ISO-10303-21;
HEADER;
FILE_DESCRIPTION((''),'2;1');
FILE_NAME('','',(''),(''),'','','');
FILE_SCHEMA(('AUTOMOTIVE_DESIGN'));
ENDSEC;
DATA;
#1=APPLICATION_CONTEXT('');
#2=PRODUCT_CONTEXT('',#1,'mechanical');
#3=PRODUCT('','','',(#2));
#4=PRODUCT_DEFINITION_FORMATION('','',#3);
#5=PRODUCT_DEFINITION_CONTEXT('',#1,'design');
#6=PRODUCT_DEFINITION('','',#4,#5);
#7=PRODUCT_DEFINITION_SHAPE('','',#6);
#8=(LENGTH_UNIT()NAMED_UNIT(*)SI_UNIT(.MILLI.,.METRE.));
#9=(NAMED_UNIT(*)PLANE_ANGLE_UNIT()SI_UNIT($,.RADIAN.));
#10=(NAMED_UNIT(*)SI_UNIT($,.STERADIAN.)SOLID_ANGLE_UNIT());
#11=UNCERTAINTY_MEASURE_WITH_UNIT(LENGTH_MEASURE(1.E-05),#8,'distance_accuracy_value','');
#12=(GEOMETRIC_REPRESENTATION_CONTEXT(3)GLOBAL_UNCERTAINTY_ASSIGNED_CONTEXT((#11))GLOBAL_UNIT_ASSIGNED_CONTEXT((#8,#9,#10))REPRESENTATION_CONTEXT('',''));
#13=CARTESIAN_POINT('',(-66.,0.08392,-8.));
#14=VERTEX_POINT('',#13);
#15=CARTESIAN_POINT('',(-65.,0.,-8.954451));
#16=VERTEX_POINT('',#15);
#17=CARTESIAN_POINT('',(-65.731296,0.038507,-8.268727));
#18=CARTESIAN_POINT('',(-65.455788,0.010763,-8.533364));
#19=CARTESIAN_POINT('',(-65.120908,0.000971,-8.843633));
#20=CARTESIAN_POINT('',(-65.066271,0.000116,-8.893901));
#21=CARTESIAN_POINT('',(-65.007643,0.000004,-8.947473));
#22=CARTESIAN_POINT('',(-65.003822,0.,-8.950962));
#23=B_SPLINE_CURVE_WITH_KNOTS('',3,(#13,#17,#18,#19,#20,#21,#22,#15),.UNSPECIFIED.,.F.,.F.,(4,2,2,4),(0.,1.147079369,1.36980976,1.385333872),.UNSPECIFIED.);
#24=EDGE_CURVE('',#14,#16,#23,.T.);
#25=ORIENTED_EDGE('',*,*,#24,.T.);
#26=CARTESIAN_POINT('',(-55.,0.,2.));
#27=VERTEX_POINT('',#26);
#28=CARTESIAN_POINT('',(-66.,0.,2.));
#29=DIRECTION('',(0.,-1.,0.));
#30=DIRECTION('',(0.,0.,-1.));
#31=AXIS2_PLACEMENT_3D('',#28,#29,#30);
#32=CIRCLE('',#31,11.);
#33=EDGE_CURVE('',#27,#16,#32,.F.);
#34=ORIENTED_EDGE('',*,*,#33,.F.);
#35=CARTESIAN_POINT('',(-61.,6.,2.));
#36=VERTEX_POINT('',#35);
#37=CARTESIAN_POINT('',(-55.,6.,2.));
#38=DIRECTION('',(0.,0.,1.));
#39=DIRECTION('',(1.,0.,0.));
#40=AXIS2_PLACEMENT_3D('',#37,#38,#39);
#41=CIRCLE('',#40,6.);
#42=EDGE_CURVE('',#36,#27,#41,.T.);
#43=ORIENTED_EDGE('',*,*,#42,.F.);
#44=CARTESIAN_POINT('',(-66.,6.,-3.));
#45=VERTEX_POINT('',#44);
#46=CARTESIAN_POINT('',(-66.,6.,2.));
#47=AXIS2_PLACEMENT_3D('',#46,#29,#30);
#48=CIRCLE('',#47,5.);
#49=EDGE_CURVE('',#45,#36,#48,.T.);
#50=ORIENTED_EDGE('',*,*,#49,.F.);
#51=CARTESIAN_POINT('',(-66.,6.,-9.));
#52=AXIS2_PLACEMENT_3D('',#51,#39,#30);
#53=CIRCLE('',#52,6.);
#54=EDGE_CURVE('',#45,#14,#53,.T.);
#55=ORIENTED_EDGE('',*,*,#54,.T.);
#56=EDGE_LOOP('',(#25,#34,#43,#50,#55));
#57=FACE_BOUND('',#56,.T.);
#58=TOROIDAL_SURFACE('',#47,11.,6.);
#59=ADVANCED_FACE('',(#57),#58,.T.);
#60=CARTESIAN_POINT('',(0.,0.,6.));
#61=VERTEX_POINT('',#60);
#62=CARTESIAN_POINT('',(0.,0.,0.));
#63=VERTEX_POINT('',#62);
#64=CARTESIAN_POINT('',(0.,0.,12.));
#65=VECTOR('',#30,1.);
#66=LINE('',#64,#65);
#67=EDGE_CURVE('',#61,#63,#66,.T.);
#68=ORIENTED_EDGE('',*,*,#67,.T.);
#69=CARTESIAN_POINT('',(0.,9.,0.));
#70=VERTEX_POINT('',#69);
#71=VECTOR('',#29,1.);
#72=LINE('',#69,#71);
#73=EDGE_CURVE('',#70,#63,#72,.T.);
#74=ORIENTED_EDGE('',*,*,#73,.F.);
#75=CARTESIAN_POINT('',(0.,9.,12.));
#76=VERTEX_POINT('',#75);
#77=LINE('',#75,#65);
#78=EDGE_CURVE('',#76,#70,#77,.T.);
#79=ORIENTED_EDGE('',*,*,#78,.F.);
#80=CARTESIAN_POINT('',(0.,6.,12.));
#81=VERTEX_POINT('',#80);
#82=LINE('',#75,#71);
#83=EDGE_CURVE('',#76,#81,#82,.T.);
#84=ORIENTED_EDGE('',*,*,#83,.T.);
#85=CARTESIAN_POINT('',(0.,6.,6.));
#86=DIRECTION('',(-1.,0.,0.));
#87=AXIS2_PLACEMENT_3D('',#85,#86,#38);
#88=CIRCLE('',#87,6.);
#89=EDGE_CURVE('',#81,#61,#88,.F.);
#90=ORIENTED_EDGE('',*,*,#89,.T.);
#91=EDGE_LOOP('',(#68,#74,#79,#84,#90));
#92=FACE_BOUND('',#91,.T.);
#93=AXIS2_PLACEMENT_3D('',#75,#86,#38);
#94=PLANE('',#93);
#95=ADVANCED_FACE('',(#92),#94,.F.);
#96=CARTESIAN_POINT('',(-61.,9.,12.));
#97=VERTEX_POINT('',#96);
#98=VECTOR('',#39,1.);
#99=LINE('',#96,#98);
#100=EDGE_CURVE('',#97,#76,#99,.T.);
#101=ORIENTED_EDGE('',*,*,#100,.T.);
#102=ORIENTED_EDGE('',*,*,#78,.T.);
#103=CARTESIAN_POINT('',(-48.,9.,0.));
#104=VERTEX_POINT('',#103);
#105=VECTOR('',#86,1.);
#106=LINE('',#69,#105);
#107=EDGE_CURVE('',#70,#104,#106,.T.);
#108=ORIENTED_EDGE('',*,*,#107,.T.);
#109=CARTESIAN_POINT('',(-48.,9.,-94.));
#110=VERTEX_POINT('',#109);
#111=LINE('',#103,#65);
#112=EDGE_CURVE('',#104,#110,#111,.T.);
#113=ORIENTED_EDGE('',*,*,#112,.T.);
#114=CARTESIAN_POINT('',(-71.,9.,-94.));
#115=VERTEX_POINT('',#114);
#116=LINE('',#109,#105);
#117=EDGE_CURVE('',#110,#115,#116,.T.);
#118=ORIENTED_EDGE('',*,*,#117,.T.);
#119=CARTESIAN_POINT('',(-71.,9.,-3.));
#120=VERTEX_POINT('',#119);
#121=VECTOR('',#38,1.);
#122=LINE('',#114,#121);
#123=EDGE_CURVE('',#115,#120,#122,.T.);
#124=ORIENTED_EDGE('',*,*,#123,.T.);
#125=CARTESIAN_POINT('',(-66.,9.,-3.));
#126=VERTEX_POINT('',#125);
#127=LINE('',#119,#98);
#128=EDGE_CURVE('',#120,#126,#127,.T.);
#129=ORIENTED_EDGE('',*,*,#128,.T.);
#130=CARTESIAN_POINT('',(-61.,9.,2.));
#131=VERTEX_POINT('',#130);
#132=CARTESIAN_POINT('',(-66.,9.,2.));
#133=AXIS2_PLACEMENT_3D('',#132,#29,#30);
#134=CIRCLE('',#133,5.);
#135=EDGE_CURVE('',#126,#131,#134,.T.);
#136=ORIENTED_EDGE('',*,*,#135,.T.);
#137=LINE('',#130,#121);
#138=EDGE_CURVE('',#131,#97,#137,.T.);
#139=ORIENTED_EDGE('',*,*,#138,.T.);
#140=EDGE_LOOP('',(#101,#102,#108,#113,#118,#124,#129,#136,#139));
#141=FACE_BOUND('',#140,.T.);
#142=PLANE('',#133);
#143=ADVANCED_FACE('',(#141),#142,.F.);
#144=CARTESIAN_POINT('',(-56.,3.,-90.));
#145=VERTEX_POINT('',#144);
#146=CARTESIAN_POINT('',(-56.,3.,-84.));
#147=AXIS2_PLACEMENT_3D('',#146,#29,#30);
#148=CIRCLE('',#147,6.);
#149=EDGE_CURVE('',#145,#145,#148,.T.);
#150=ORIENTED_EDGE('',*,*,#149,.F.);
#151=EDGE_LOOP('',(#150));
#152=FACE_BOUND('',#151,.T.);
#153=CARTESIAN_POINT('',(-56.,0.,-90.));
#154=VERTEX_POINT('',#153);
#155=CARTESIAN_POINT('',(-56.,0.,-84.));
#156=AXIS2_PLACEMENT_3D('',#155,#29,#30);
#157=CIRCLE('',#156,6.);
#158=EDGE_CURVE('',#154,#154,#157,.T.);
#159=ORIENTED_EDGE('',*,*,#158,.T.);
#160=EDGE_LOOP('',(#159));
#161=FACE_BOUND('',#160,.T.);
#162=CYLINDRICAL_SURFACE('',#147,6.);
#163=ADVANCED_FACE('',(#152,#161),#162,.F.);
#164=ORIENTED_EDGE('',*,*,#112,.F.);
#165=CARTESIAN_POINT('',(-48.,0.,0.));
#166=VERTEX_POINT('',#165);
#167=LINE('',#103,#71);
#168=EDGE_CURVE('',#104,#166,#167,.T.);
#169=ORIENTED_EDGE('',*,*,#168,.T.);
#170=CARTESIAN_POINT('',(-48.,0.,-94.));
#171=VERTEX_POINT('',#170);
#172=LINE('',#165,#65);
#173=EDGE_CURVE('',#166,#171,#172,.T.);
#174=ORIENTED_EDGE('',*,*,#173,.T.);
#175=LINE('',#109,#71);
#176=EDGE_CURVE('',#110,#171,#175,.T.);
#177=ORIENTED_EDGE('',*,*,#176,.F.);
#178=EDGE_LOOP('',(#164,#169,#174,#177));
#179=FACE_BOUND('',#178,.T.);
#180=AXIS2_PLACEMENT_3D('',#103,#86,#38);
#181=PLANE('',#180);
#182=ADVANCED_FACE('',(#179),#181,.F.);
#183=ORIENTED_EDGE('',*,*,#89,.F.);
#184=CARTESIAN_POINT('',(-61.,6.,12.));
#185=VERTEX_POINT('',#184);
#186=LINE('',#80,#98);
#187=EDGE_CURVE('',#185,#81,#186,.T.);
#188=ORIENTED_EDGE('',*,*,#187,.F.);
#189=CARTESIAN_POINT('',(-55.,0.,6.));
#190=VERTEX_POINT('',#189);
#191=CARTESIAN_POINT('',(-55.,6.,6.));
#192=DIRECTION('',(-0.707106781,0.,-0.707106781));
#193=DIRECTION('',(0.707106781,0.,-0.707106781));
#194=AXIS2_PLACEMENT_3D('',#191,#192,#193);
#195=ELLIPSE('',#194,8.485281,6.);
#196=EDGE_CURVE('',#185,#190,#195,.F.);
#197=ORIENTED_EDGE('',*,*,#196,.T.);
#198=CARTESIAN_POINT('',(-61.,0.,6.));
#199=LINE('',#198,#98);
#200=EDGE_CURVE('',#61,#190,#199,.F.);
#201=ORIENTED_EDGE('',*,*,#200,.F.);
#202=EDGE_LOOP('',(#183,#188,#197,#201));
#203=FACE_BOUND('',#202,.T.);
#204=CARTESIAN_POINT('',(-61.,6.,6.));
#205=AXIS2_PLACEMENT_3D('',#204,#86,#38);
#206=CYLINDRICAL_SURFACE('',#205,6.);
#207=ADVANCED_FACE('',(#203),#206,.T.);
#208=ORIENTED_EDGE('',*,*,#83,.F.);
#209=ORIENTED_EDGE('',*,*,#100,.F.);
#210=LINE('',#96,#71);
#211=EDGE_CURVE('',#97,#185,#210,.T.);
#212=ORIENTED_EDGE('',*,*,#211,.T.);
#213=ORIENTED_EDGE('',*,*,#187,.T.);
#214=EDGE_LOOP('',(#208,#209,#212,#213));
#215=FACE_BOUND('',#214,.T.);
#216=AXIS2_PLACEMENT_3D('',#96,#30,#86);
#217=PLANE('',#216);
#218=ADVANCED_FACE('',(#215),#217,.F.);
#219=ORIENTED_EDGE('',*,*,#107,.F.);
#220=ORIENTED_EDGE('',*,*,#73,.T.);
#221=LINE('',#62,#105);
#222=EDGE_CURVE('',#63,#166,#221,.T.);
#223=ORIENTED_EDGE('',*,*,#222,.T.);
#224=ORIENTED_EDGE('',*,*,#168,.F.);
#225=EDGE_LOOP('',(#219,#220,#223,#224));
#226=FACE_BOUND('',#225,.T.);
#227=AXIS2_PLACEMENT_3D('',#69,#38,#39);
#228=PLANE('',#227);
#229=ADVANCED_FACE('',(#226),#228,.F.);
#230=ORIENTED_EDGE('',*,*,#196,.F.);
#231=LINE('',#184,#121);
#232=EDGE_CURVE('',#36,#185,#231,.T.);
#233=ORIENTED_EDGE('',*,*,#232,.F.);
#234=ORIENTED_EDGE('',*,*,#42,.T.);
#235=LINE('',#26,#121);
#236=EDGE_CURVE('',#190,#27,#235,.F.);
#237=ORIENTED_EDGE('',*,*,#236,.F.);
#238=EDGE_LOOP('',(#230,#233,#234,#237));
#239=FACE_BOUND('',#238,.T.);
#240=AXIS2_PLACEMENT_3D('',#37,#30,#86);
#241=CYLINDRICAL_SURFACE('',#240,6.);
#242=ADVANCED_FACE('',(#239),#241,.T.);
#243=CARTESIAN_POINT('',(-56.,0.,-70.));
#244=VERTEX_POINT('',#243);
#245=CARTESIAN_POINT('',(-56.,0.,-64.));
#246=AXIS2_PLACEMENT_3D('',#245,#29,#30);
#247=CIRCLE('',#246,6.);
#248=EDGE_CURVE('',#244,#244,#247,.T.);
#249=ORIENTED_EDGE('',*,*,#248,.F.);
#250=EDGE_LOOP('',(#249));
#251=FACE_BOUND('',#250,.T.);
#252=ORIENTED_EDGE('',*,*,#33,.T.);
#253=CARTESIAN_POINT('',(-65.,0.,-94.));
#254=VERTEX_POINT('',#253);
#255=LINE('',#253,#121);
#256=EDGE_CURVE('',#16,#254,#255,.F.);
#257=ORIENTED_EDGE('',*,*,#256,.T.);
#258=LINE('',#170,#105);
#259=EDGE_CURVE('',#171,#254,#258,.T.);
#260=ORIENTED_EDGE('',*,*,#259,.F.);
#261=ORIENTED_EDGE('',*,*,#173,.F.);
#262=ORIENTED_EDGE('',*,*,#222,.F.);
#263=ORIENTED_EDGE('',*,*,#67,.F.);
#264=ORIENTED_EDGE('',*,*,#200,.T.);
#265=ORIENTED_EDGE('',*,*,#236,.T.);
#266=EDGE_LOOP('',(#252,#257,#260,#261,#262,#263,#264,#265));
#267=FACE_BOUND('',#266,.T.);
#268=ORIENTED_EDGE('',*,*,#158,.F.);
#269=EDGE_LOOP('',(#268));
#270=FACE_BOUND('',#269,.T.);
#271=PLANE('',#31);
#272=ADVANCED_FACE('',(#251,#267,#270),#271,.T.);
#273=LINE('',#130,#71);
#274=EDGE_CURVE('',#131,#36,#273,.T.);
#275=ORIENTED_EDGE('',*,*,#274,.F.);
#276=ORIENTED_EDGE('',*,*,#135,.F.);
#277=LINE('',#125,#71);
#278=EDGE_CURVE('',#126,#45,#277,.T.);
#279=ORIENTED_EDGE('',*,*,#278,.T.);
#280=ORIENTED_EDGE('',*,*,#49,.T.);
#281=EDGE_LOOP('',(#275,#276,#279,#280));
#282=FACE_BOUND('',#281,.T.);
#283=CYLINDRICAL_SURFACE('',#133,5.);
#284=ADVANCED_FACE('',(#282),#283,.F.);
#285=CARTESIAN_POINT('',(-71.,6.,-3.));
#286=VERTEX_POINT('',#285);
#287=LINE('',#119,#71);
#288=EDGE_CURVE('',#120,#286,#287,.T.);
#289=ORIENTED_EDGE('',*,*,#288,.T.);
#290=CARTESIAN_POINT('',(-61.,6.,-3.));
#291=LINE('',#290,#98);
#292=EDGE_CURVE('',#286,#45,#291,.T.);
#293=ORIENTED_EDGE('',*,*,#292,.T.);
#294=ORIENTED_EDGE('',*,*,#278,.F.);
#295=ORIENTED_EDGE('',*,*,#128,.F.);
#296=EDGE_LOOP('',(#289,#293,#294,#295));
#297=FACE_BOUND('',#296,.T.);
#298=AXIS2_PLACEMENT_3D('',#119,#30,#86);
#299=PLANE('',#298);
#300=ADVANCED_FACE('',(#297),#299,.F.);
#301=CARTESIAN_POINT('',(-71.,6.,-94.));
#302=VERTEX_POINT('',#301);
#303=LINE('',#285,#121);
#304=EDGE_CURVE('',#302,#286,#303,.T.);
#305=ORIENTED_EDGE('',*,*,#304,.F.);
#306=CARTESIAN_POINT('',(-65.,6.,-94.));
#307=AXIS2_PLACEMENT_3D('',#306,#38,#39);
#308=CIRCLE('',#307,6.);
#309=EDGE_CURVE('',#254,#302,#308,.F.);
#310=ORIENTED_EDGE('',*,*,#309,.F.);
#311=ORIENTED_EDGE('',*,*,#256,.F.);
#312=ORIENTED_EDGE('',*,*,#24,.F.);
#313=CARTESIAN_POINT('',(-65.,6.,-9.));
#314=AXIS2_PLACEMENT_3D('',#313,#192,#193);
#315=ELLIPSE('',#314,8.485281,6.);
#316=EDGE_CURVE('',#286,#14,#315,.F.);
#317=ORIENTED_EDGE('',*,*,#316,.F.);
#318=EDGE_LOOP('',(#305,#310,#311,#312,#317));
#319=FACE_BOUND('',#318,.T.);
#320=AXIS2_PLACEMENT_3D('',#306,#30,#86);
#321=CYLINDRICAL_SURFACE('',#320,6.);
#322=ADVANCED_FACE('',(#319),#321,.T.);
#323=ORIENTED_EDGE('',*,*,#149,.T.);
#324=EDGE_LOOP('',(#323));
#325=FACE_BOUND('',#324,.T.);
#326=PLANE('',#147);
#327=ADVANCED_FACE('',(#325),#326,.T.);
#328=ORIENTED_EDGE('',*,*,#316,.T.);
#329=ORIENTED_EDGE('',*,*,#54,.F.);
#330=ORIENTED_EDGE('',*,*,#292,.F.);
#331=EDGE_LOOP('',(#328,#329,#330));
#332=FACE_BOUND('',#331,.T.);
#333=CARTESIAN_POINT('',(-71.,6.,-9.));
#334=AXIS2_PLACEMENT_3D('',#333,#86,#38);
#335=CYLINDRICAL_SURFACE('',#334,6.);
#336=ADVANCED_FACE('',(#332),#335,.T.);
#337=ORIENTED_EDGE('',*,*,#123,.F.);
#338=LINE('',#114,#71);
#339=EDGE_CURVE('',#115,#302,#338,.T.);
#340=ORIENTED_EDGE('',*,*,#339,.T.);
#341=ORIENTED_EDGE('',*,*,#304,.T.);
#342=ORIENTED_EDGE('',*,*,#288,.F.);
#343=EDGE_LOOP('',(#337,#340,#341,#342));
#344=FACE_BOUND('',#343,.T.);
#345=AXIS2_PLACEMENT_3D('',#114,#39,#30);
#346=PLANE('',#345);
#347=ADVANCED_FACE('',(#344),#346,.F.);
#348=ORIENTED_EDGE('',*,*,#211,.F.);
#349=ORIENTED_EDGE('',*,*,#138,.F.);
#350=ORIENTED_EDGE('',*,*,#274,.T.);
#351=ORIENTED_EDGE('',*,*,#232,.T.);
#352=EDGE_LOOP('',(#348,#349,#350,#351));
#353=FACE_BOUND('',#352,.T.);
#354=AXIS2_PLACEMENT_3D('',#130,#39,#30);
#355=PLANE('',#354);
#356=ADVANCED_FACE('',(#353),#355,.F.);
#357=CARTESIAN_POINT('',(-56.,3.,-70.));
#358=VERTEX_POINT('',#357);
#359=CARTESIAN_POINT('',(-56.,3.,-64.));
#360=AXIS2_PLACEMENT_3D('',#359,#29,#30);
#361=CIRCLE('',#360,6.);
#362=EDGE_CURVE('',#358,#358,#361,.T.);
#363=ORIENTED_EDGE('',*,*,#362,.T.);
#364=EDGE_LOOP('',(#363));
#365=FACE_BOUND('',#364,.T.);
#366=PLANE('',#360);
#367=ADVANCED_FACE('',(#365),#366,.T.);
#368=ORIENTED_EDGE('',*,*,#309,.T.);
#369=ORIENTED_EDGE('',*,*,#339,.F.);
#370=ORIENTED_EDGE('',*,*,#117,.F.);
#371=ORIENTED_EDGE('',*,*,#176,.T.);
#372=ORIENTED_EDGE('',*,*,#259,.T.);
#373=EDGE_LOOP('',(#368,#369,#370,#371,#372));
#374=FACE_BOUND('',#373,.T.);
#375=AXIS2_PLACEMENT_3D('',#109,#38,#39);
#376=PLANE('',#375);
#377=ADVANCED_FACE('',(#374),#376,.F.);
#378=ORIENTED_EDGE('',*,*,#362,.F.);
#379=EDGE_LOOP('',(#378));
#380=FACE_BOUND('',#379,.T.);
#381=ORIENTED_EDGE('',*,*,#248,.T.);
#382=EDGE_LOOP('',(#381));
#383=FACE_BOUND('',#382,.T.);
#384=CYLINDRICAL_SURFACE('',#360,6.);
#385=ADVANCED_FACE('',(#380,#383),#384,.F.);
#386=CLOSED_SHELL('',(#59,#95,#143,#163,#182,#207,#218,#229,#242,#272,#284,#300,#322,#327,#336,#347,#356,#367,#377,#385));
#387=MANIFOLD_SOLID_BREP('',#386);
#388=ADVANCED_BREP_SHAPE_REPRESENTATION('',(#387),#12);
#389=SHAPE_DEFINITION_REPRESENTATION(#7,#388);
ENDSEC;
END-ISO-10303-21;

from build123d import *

# Parameters (mm, degrees)
EXTRUDE_1_DEPTH     = 9
FILLET_1_R          = 6
SKETCH_2_R          = 6
CUT_EXTRUDE_1_DEPTH = 3


with BuildPart() as part:
    # 草圖1 → 填料-伸長1 (new body)
    with BuildSketch(Plane(origin=(0, 0, 0), x_dir=(1, 0, 0), z_dir=(0, 1, 0))):
        with BuildLine():
            Line((0, 0), (-48, 0))
            Line((-48, 0), (-48, 94))
            Line((-48, 94), (-71, 94))
            Line((-71, 94), (-71, 3))
            Line((-71, 3), (-66, 3))
            ThreePointArc((-66, 3), (-62.464466094, 1.535533906), (-61, -2))
            Line((-61, -2), (-61, -12))
            Line((-61, -12), (0, -12))
            Line((0, -12), (0, 0))
        make_face()
    extrude(amount=EXTRUDE_1_DEPTH)

    # 圓角1
    # the kernel refuses this fillet: 6 mm, written as the material it takes off along each edge
    with BuildSketch(Plane(origin=(-76, 0, 12), x_dir=(0, 1, 0), z_dir=(1, 0, 0))) as fillet_1_piece_1:
        with BuildLine():
            CenterArc((FILLET_1_R, -FILLET_1_R), FILLET_1_R, 90, 90)
            Line((0, -FILLET_1_R), (0, 0))
            Line((0, 0), (FILLET_1_R, 0))
        make_face()
    extrude(amount=91, mode=Mode.SUBTRACT)
    with BuildSketch(Plane(origin=(-61, 0, 2), x_dir=(0, 1, 0), z_dir=(0, 0, 1))) as fillet_1_piece_2:
        with BuildLine():
            CenterArc((FILLET_1_R, -FILLET_1_R), FILLET_1_R, 90, 90)
            Line((0, -FILLET_1_R), (0, 0))
            Line((0, 0), (FILLET_1_R, 0))
        make_face()
    extrude(amount=25, mode=Mode.SUBTRACT)
    with BuildSketch(Plane(origin=(-66, 0, 2), x_dir=(0, 0, -1), z_dir=(-1, 0, 0))) as fillet_1_piece_3:
        with BuildLine():
            CenterArc((5 + FILLET_1_R, -FILLET_1_R), FILLET_1_R, 90, 90)
            Line((5 + FILLET_1_R, 0), (5, 0))
            Line((5, 0), (5, -FILLET_1_R))
        make_face()
    revolve(axis=Axis((-66, 0, 2), (0, -1, 0)), revolution_arc=90, mode=Mode.SUBTRACT)
    with BuildSketch(Plane(origin=(-71, 0, -109), x_dir=(0, 1, 0), z_dir=(0, 0, 1))) as fillet_1_piece_4:
        with BuildLine():
            CenterArc((FILLET_1_R, -FILLET_1_R), FILLET_1_R, 90, 90)
            Line((0, -FILLET_1_R), (0, 0))
            Line((0, 0), (FILLET_1_R, 0))
        make_face()
    extrude(amount=121, mode=Mode.SUBTRACT)
    with BuildSketch(Plane(origin=(-86, 0, -3), x_dir=(0, 1, 0), z_dir=(1, 0, 0))) as fillet_1_piece_5:
        with BuildLine():
            CenterArc((FILLET_1_R, -FILLET_1_R), FILLET_1_R, 90, 90)
            Line((0, -FILLET_1_R), (0, 0))
            Line((0, 0), (FILLET_1_R, 0))
        make_face()
    extrude(amount=20, mode=Mode.SUBTRACT)

    # 草圖2 → 除料-伸長1 (cut)
    with BuildSketch(Plane.XZ):
        with Locations(Location((-56, -84, 0), (0, 0, 270))):
            Circle(SKETCH_2_R)
        with Locations(Location((-56, -64, 0), (0, 0, 270))):
            Circle(SKETCH_2_R)
    extrude(amount=-CUT_EXTRUDE_1_DEPTH, mode=Mode.SUBTRACT)


solid = part.part
